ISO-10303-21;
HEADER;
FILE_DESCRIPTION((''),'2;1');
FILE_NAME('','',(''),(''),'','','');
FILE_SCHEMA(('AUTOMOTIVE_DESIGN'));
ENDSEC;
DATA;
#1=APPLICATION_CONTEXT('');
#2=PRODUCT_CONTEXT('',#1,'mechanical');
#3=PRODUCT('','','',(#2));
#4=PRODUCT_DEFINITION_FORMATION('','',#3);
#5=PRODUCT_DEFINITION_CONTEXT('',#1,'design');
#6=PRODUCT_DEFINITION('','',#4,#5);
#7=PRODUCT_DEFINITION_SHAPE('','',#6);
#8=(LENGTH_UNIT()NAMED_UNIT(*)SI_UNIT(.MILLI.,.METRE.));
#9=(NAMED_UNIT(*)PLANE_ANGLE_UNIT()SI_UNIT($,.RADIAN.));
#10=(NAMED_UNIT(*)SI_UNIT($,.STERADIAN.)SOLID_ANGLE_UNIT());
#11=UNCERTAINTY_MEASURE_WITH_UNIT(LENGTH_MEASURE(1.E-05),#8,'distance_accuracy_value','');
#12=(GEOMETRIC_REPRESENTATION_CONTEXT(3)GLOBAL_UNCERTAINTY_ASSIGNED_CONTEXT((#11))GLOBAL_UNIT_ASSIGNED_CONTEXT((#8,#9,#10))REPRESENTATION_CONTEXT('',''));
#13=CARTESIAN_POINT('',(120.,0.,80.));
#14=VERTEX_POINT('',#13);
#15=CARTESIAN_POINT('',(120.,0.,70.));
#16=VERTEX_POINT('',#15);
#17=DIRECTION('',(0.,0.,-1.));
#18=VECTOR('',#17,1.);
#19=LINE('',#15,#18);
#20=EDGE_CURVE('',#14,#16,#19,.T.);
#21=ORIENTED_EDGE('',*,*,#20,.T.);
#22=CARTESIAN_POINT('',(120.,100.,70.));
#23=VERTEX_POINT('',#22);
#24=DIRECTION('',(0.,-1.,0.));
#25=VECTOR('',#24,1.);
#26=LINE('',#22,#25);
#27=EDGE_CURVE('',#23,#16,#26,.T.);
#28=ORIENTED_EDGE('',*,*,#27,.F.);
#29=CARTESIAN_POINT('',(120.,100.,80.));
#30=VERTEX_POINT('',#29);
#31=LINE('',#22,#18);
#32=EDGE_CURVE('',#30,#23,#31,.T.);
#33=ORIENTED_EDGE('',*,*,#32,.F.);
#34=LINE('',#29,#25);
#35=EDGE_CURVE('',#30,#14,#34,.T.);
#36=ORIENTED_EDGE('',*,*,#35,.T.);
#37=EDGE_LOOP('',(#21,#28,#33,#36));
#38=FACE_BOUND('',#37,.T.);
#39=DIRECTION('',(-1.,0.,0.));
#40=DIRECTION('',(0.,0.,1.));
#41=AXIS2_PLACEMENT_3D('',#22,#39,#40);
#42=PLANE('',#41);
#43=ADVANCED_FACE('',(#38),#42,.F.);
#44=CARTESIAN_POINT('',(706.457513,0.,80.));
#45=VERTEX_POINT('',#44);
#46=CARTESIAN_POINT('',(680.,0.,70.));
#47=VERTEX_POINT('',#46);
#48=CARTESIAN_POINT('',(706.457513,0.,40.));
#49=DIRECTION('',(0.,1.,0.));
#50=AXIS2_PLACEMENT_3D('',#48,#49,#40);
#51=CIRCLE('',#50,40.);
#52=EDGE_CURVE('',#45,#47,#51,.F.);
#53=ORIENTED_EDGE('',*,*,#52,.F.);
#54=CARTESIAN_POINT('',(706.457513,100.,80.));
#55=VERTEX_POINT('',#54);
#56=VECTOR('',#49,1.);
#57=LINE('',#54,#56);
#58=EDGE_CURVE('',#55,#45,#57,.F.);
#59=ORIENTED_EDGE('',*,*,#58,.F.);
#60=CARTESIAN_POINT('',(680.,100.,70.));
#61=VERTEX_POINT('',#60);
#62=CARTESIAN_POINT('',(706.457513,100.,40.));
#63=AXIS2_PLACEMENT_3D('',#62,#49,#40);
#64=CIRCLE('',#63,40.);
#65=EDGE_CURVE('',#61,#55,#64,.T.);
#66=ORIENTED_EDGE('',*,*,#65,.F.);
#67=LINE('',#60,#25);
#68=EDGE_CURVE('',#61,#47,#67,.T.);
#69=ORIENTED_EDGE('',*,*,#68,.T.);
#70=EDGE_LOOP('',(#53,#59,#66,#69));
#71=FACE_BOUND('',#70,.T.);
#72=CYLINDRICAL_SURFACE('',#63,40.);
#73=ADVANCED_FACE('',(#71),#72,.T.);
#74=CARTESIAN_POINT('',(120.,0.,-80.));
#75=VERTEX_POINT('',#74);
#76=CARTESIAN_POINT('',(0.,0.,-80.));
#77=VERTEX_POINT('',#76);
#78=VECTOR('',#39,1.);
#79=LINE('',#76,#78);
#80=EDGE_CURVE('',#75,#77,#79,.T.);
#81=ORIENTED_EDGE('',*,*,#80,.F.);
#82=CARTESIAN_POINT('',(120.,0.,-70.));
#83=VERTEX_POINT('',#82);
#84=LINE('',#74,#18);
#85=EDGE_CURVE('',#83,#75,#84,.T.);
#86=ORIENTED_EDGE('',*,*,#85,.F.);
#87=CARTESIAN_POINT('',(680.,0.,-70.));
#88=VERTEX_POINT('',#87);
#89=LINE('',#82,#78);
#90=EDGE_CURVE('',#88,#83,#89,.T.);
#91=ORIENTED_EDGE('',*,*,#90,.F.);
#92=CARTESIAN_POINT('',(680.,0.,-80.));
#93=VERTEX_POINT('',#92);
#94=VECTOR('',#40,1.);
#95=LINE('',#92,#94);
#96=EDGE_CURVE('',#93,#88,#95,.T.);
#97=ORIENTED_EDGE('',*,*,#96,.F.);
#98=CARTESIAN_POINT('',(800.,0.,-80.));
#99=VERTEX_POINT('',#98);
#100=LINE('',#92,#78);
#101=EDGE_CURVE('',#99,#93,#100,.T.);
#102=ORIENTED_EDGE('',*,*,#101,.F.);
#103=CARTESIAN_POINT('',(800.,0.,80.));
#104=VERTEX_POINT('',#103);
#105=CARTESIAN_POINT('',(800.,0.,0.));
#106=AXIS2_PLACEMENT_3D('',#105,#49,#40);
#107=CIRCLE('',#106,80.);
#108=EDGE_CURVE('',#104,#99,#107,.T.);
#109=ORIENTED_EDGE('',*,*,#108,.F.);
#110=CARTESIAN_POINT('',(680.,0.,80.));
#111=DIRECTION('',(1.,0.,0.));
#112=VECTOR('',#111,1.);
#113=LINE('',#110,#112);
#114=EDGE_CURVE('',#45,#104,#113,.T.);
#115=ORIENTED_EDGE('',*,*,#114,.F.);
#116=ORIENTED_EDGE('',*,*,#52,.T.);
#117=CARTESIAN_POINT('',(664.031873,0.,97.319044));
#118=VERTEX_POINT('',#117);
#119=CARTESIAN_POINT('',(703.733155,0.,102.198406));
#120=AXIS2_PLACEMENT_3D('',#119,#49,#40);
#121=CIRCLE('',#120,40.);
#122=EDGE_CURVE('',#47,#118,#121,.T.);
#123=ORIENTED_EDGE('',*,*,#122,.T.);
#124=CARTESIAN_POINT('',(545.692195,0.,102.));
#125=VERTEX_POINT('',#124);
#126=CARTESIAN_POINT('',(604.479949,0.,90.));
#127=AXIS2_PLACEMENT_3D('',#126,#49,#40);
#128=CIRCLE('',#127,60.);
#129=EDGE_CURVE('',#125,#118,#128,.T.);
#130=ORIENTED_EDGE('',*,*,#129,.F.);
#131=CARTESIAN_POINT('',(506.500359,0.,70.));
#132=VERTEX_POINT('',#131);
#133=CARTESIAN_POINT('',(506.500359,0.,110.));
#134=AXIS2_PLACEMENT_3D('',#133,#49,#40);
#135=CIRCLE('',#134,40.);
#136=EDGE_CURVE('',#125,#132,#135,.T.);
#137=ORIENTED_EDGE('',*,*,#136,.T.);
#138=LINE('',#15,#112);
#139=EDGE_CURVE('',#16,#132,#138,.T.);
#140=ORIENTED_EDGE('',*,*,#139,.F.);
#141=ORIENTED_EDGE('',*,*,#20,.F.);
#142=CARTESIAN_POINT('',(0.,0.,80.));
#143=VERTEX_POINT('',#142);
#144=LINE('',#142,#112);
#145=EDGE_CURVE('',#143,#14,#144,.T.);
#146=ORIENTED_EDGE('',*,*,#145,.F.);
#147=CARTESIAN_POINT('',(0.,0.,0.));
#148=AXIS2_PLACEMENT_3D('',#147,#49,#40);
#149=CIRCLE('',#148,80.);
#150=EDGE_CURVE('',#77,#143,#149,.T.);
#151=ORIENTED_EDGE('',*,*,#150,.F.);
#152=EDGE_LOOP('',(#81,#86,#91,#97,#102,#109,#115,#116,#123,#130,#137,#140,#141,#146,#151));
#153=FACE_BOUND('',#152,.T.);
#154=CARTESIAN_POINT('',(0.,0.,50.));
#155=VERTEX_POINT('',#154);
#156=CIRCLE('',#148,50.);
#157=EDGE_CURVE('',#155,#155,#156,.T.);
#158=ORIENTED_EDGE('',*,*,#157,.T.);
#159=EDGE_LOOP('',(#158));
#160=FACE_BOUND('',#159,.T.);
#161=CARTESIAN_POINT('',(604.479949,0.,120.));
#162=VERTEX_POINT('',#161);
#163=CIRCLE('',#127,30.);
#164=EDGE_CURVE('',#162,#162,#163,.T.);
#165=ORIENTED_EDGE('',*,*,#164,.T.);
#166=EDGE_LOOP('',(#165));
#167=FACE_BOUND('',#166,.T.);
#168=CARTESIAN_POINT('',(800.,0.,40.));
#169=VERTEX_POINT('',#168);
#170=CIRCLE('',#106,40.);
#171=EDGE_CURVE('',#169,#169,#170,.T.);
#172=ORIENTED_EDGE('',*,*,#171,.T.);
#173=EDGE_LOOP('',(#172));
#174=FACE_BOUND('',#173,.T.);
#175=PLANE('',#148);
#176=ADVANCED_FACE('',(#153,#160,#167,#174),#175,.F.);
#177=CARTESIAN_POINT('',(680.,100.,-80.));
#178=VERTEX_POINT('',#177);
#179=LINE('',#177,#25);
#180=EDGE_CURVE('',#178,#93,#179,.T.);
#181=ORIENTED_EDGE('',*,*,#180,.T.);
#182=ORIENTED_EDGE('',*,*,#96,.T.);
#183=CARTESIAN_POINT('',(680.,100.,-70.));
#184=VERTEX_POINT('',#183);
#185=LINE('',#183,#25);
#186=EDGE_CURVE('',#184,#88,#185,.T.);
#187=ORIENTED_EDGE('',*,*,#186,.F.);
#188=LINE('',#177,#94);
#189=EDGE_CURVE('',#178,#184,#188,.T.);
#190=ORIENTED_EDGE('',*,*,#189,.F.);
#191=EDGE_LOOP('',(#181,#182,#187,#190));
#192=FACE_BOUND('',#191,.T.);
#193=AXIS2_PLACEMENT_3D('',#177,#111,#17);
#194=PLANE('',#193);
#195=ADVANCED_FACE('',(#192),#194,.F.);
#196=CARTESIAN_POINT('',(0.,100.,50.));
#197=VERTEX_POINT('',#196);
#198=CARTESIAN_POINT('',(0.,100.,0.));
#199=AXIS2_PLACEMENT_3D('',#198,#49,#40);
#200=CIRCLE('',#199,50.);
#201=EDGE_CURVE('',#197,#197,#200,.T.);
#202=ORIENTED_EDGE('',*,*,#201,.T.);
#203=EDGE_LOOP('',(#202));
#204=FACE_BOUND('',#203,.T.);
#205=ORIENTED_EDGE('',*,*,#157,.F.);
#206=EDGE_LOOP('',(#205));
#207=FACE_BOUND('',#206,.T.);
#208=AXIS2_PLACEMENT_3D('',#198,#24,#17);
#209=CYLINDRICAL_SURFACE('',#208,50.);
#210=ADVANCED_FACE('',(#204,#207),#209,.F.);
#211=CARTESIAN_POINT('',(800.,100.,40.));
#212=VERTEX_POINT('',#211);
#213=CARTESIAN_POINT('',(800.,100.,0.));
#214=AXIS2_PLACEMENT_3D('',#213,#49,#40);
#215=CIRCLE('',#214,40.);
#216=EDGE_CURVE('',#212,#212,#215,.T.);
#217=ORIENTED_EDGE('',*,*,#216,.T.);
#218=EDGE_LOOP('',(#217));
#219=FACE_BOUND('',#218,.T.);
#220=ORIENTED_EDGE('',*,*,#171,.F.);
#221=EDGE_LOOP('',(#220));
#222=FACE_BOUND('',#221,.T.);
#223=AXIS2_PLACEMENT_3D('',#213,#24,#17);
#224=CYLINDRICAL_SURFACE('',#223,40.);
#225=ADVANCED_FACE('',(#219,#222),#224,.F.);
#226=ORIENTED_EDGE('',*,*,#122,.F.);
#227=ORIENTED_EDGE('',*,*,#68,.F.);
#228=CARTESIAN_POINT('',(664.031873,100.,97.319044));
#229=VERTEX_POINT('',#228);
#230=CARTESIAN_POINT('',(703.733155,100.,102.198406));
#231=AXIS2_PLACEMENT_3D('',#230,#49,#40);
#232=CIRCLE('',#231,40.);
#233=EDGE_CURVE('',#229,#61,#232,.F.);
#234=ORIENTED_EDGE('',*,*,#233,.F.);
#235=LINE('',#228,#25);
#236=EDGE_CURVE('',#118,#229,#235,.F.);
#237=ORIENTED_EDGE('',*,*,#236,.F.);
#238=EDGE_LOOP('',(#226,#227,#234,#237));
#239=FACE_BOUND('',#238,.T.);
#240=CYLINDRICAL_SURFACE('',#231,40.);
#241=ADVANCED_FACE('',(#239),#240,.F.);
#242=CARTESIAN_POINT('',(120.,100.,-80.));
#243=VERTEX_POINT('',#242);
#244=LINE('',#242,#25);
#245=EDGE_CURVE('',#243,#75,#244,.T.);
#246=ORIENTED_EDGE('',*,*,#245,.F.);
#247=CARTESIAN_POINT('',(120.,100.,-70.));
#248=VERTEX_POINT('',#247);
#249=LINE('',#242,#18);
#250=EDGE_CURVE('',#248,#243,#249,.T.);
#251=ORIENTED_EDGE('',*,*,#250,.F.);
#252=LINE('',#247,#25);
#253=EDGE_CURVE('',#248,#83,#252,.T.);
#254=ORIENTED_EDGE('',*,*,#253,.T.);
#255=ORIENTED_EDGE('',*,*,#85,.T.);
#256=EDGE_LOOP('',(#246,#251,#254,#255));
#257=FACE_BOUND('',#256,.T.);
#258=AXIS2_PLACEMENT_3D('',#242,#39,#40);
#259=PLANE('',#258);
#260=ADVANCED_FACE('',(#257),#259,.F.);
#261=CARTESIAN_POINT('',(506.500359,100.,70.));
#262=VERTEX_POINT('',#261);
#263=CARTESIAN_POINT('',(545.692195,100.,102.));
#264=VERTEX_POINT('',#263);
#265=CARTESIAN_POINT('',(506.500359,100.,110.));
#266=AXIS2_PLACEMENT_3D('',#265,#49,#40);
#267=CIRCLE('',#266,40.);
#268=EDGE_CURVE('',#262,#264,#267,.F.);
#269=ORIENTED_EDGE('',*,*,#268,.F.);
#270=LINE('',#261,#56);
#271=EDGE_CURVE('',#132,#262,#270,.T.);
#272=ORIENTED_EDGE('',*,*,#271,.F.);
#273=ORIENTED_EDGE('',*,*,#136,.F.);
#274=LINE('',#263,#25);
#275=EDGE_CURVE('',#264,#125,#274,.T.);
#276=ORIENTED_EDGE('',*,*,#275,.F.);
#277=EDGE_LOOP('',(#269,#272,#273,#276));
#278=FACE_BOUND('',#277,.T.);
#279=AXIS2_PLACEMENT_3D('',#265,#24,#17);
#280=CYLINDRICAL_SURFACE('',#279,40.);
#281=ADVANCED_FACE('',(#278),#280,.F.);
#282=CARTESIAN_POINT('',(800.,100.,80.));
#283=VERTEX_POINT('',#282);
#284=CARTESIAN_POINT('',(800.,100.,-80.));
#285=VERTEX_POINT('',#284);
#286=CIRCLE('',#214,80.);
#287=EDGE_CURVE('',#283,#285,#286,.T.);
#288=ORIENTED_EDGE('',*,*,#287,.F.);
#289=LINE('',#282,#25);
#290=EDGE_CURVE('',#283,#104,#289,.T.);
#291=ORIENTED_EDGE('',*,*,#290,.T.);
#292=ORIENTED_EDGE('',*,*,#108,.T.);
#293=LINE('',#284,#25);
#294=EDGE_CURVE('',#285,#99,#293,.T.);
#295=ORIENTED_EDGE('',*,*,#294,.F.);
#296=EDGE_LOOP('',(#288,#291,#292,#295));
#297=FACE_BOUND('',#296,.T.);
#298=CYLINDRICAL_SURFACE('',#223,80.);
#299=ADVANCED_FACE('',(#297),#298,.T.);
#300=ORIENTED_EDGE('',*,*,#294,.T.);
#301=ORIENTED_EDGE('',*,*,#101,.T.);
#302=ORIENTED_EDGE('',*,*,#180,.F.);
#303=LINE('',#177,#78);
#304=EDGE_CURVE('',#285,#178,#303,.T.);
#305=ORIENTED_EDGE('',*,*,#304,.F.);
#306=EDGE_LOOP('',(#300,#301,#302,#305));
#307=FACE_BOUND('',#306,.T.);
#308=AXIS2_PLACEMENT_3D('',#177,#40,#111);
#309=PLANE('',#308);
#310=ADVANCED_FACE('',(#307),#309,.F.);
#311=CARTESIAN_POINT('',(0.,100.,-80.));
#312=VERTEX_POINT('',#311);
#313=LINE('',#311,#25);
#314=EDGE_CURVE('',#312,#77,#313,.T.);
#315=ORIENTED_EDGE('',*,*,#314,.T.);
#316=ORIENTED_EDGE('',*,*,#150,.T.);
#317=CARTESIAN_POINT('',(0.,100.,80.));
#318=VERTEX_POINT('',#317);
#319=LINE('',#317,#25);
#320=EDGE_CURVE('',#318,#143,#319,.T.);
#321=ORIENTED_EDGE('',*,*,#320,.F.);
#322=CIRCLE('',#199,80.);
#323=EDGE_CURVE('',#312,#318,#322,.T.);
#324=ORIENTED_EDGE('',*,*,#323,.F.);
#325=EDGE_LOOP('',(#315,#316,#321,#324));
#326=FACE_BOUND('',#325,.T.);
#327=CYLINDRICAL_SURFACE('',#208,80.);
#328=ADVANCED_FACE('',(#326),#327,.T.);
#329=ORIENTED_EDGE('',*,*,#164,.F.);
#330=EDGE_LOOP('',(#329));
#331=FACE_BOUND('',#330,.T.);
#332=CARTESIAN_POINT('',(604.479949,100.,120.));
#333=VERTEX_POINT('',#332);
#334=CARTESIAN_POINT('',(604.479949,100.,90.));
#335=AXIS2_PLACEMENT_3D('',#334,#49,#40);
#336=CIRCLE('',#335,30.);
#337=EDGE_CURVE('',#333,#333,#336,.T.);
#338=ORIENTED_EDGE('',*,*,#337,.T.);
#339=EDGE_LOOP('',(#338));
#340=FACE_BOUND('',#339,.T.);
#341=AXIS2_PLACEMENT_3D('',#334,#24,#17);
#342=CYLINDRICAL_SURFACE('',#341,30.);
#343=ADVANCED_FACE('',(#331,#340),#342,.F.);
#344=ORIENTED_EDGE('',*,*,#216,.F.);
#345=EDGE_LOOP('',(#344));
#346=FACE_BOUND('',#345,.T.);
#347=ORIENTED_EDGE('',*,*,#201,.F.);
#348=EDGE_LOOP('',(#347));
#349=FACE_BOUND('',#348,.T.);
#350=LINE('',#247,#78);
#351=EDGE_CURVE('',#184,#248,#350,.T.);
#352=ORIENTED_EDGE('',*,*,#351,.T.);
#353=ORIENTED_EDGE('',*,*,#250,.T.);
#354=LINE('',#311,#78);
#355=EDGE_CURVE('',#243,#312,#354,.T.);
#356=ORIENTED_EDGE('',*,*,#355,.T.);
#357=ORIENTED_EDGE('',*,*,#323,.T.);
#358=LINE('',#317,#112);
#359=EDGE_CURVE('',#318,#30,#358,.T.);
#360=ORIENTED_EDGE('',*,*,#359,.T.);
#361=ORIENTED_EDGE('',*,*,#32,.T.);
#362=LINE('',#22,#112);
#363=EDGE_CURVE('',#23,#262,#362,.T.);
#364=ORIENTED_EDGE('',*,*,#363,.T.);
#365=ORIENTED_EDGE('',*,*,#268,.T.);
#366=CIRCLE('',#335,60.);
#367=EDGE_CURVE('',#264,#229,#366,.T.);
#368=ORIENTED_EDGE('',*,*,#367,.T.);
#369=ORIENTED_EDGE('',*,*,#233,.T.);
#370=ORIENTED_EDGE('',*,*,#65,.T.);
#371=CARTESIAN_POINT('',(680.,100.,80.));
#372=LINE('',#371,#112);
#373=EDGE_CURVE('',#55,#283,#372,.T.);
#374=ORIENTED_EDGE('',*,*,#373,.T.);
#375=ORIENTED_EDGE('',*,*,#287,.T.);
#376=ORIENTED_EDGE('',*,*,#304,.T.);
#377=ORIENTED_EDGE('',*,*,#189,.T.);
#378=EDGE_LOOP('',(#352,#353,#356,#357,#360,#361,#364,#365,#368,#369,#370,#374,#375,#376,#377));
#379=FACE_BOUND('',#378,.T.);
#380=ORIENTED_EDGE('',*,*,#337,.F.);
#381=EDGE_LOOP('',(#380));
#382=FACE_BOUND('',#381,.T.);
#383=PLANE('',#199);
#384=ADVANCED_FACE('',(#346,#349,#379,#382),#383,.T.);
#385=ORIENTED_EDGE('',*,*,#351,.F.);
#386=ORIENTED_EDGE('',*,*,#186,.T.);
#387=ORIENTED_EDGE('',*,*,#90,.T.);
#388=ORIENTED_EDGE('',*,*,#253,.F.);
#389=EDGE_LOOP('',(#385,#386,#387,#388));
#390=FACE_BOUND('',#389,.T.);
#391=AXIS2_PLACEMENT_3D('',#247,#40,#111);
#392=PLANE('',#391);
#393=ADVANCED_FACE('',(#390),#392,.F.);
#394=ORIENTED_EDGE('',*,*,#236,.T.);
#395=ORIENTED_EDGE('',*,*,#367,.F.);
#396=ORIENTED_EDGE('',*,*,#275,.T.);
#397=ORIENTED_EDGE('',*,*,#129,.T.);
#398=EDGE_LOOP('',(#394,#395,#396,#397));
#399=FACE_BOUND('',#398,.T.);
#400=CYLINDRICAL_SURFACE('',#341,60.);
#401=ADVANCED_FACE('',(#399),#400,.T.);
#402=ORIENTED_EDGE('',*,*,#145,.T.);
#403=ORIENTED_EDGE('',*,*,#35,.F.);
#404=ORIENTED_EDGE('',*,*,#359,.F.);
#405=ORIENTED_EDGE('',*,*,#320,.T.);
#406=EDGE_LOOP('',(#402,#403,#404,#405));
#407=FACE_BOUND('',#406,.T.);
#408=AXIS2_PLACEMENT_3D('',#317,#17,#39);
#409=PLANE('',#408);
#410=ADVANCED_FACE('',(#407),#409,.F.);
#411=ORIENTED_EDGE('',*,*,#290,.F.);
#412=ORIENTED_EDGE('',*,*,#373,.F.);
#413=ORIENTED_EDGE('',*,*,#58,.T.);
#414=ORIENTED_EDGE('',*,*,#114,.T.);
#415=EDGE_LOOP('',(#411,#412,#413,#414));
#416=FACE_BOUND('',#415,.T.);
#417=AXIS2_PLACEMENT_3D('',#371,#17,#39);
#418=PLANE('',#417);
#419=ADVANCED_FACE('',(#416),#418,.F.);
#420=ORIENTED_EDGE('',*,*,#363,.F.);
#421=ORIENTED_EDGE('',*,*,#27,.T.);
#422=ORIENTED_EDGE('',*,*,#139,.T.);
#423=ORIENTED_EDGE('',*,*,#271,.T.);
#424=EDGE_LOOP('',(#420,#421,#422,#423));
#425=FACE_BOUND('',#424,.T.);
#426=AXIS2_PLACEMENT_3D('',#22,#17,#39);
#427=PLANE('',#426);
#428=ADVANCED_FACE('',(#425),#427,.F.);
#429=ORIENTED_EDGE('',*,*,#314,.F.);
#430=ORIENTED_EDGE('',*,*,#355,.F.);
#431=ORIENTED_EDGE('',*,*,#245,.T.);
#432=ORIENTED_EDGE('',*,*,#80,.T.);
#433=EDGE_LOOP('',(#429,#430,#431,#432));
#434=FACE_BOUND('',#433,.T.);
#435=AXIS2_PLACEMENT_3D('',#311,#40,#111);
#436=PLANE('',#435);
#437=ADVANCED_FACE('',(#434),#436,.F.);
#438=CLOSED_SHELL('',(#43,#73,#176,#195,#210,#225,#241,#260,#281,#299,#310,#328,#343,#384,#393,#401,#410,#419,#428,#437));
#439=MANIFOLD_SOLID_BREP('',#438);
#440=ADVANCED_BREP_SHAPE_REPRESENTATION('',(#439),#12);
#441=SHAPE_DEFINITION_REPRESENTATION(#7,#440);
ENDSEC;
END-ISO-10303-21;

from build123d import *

# Parameters (mm, degrees)
SKETCH1_R           = 30
SKETCH1_R_2         = 50
SKETCH1_R_3         = 40
BOSS_EXTRUDE1_DEPTH = 100
FILLET1_R           = 40
FILLET2_R           = 40
FILLET3_R           = 40


with BuildPart() as part:
    # Sketch1 → Boss-Extrude1 (new body)
    with BuildSketch(Plane(origin=(0, 0, 0), x_dir=(1, 0, 0), z_dir=(0, 1, 0))):
        with BuildLine():
            Line((0, 80), (120, 80))
            Line((120, 80), (120, 70))
            Line((120, 70), (680, 70))
            Line((680, 70), (680, 80))
            Line((680, 80), (800, 80))
            ThreePointArc((800, 80), (880, 0), (800, -80))
            Line((800, -80), (680, -80))
            Line((680, -80), (680, -70))
            Line((680, -70), (661.048491655, -70))
            ThreePointArc((661.048491655, -70), (604.479949161, -150), (547.911406666, -70))
            Line((547.911406666, -70), (120, -70))
            Line((120, -70), (120, -80))
            Line((120, -80), (0, -80))
            ThreePointArc((0, -80), (-80, 0), (0, 80))
        make_face()
        with Locations(Location((604.479949161, -90, 0), (0, 0, 270))):
            Circle(SKETCH1_R, mode=Mode.SUBTRACT)
        with Locations(Location((0, 0, 0), (0, 0, 270))):
            Circle(SKETCH1_R_2, mode=Mode.SUBTRACT)
        with Locations(Location((800, 0, 0), (0, 0, 270))):
            Circle(SKETCH1_R_3, mode=Mode.SUBTRACT)
    extrude(amount=BOSS_EXTRUDE1_DEPTH)

    # Fillet1
    fillet1_edges = [part.edges().sort_by_distance(p)[0] for p in [
        (547.911406666, 50, 70),
    ]]
    fillet(fillet1_edges, radius=FILLET1_R)

    # Fillet2
    # the kernel refuses this fillet: 40 mm, written as the material it adds along each edge
    with BuildSketch(Plane(origin=(661.048491655, 0, 70), x_dir=(0.10855976910838376, 0, 0.9940899237650156), z_dir=(0, 1, 0))) as fillet2_piece_1:
        with BuildLine():
            CenterArc((36.641948169, 38.936942319), FILLET2_R, 210.161293822, 46.599784771)
            Line((2.05737137, 18.839503485), (1.365679834, 18.437554709))
            ThreePointArc((1.365679834, 18.437554709), (0.233413746, 9.506599558), (-0.795271939, 0.086847815))
            Line((-0.795271939, 0.086847815), (0.183209741, -0.778738846))
            ThreePointArc((0.183209741, -0.778738846), (13.740730563, 0.794586522), (27.298251386, -0.778738846))
            Line((27.298251386, -0.778738846), (27.481461127, 0))
        make_face()
    extrude(amount=100)

    # Fillet3
    # the kernel refuses this fillet: 40 mm, written as the material it takes off along each edge
    with BuildSketch(Plane(origin=(680, -66.143782777, 80), x_dir=(0, 0, -1), z_dir=(0, 1, 0))) as fillet3_piece_1:
        with BuildLine():
            CenterArc((40, -26.457513111), FILLET3_R, 138.590377891, 41.409622109)
            Line((0, -26.457513111), (-0.8, -26.457513111))
            Line((-0.8, -26.457513111), (-0.8, 0))
            Line((-0.8, 0), (0, 0.8))
            ThreePointArc((0, 0.8), (5, 0.8), (9.4, 0.529150262))
            Line((9.4, 0.529150262), (10, 0))
        make_face()
    extrude(amount=232.287565553, mode=Mode.SUBTRACT)


solid = part.part
